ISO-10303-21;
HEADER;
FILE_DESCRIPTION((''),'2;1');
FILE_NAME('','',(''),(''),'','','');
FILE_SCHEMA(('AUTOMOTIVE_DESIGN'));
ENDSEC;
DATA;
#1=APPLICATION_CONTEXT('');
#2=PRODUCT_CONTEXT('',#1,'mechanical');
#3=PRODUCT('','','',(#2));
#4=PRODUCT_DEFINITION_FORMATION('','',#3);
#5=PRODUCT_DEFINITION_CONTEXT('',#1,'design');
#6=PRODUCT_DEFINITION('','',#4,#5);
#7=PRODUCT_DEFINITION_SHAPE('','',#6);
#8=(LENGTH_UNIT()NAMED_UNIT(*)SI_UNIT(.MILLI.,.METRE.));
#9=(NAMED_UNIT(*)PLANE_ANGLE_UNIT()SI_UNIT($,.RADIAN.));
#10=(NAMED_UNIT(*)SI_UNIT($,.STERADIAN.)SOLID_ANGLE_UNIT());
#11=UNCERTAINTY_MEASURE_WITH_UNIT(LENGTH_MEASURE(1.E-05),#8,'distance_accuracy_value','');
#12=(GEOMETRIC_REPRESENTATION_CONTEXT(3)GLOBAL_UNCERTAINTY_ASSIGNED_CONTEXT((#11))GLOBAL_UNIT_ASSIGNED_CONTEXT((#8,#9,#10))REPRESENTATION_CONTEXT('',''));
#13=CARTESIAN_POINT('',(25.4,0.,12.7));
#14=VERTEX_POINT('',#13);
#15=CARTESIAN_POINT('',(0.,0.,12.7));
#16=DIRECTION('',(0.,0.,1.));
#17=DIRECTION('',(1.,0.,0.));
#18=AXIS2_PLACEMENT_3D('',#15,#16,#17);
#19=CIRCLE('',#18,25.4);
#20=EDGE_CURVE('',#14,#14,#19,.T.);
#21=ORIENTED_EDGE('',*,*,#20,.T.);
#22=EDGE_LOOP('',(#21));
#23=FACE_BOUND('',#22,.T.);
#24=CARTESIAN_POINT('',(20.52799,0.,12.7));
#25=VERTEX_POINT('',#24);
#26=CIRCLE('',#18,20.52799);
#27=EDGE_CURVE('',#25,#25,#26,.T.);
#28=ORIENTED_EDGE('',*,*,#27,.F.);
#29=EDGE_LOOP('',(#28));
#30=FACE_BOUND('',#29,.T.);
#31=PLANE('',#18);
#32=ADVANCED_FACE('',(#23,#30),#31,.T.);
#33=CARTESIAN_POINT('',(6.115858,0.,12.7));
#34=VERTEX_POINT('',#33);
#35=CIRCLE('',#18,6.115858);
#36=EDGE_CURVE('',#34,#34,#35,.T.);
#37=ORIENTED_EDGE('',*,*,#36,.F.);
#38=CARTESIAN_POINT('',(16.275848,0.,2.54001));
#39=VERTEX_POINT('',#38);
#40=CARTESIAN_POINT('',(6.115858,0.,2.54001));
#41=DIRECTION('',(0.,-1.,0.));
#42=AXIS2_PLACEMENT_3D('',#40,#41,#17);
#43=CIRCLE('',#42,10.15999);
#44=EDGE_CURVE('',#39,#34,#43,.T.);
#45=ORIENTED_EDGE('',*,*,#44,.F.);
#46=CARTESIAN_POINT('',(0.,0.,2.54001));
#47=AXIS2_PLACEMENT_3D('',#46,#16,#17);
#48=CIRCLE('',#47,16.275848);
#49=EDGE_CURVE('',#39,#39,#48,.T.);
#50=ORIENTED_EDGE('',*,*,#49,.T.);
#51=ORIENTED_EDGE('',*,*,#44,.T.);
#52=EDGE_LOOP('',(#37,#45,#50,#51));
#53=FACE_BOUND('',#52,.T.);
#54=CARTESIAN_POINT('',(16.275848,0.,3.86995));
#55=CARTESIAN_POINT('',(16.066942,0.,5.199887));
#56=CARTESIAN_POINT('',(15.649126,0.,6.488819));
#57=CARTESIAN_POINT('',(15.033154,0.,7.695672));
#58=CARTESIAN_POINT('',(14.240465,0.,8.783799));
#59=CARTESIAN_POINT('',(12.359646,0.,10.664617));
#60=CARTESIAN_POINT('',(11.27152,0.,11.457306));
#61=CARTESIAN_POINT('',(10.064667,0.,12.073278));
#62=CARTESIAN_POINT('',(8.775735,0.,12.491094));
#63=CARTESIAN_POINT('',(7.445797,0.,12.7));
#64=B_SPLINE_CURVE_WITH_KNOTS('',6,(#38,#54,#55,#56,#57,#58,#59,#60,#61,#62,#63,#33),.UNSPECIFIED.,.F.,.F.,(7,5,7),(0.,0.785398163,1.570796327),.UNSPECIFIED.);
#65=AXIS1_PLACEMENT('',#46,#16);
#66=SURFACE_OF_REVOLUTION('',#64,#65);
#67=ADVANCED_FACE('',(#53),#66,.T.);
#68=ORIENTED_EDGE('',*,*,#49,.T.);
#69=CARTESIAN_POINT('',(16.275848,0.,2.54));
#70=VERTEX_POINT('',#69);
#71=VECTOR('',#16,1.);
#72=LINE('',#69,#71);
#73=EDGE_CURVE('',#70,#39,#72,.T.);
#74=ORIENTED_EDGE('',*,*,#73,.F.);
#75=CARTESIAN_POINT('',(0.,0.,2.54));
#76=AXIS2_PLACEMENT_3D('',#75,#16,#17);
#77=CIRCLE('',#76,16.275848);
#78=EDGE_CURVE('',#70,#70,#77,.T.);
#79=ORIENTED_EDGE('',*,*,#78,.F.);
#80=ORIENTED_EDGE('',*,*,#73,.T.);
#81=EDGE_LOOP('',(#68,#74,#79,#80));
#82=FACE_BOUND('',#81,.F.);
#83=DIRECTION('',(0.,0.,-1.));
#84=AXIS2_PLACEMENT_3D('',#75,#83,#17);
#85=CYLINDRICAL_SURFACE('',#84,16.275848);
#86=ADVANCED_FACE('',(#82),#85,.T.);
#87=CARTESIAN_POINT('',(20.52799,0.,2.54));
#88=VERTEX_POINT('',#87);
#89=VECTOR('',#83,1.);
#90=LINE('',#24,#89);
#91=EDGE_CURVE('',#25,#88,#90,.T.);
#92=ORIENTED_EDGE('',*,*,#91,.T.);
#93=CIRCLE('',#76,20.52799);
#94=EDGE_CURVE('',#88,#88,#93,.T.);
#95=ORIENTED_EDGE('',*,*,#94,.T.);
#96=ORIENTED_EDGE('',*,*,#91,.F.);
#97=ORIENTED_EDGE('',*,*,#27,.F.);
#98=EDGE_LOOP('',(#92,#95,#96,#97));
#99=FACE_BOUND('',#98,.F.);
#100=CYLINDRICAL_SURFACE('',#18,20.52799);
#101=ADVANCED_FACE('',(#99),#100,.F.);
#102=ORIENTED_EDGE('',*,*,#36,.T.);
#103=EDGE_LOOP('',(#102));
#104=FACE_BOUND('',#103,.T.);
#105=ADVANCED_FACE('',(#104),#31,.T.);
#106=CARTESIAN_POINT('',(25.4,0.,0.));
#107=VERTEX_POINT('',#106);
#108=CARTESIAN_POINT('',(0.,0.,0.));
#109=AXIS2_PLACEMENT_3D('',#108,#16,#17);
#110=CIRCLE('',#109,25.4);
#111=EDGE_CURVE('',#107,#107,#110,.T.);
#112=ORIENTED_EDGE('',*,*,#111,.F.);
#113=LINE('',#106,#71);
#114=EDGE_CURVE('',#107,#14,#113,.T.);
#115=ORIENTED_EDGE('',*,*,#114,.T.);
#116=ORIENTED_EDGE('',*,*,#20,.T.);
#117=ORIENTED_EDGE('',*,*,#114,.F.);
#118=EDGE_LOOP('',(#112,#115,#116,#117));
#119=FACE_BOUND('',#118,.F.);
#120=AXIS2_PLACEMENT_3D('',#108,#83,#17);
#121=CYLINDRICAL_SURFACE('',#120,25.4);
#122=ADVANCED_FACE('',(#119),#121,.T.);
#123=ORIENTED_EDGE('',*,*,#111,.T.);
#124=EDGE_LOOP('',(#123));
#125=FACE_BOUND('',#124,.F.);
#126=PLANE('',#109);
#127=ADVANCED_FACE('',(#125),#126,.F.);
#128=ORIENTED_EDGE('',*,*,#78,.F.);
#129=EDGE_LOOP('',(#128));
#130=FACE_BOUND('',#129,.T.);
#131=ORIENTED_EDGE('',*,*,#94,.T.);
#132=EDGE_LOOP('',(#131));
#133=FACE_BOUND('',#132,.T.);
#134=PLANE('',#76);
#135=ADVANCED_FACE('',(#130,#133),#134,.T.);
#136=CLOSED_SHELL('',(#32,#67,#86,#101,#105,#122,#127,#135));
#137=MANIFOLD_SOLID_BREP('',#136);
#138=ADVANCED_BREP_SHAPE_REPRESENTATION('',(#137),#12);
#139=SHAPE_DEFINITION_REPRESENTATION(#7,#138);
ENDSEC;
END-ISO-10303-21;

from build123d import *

# Parameters (mm, degrees)
F0_R     = 25.4
F1_DEPTH = 12.7
F2_R     = 20.5279895556
F3_DEPTH = 10.16
F4_R     = 16.2758477469
F5_DEPTH = 10.16
F6_R     = 10.15999


# Not quite as in the source:
# - a fillet or chamfer is up to 0.001 mm smaller than in the source, because OpenCascade refuses the exact size


with BuildPart() as f1:
    # F0 (on Top) → F1 (new body)
    with BuildSketch(Plane.XY):
        Circle(F0_R)
    extrude(amount=F1_DEPTH)

    # F2 (on face) → F3 (cut)
    with BuildSketch(Plane.XY.offset(12.7)):
        Circle(F2_R)
    extrude(amount=-F3_DEPTH, mode=Mode.SUBTRACT)

    # F4 (on face) → F5 (join)
    with BuildSketch(Plane.XY.offset(2.54)):
        Circle(F4_R)
    extrude(amount=F5_DEPTH)

    # F6 (radius 10.16 in the source; OpenCascade refuses exactly that, so slightly less here)
    f6_edges = [f1.edges().sort_by_distance(p)[0] for p in [
        (-16.275848, 0, 12.7),
    ]]
    fillet(f6_edges, radius=F6_R)


solid = f1.part
